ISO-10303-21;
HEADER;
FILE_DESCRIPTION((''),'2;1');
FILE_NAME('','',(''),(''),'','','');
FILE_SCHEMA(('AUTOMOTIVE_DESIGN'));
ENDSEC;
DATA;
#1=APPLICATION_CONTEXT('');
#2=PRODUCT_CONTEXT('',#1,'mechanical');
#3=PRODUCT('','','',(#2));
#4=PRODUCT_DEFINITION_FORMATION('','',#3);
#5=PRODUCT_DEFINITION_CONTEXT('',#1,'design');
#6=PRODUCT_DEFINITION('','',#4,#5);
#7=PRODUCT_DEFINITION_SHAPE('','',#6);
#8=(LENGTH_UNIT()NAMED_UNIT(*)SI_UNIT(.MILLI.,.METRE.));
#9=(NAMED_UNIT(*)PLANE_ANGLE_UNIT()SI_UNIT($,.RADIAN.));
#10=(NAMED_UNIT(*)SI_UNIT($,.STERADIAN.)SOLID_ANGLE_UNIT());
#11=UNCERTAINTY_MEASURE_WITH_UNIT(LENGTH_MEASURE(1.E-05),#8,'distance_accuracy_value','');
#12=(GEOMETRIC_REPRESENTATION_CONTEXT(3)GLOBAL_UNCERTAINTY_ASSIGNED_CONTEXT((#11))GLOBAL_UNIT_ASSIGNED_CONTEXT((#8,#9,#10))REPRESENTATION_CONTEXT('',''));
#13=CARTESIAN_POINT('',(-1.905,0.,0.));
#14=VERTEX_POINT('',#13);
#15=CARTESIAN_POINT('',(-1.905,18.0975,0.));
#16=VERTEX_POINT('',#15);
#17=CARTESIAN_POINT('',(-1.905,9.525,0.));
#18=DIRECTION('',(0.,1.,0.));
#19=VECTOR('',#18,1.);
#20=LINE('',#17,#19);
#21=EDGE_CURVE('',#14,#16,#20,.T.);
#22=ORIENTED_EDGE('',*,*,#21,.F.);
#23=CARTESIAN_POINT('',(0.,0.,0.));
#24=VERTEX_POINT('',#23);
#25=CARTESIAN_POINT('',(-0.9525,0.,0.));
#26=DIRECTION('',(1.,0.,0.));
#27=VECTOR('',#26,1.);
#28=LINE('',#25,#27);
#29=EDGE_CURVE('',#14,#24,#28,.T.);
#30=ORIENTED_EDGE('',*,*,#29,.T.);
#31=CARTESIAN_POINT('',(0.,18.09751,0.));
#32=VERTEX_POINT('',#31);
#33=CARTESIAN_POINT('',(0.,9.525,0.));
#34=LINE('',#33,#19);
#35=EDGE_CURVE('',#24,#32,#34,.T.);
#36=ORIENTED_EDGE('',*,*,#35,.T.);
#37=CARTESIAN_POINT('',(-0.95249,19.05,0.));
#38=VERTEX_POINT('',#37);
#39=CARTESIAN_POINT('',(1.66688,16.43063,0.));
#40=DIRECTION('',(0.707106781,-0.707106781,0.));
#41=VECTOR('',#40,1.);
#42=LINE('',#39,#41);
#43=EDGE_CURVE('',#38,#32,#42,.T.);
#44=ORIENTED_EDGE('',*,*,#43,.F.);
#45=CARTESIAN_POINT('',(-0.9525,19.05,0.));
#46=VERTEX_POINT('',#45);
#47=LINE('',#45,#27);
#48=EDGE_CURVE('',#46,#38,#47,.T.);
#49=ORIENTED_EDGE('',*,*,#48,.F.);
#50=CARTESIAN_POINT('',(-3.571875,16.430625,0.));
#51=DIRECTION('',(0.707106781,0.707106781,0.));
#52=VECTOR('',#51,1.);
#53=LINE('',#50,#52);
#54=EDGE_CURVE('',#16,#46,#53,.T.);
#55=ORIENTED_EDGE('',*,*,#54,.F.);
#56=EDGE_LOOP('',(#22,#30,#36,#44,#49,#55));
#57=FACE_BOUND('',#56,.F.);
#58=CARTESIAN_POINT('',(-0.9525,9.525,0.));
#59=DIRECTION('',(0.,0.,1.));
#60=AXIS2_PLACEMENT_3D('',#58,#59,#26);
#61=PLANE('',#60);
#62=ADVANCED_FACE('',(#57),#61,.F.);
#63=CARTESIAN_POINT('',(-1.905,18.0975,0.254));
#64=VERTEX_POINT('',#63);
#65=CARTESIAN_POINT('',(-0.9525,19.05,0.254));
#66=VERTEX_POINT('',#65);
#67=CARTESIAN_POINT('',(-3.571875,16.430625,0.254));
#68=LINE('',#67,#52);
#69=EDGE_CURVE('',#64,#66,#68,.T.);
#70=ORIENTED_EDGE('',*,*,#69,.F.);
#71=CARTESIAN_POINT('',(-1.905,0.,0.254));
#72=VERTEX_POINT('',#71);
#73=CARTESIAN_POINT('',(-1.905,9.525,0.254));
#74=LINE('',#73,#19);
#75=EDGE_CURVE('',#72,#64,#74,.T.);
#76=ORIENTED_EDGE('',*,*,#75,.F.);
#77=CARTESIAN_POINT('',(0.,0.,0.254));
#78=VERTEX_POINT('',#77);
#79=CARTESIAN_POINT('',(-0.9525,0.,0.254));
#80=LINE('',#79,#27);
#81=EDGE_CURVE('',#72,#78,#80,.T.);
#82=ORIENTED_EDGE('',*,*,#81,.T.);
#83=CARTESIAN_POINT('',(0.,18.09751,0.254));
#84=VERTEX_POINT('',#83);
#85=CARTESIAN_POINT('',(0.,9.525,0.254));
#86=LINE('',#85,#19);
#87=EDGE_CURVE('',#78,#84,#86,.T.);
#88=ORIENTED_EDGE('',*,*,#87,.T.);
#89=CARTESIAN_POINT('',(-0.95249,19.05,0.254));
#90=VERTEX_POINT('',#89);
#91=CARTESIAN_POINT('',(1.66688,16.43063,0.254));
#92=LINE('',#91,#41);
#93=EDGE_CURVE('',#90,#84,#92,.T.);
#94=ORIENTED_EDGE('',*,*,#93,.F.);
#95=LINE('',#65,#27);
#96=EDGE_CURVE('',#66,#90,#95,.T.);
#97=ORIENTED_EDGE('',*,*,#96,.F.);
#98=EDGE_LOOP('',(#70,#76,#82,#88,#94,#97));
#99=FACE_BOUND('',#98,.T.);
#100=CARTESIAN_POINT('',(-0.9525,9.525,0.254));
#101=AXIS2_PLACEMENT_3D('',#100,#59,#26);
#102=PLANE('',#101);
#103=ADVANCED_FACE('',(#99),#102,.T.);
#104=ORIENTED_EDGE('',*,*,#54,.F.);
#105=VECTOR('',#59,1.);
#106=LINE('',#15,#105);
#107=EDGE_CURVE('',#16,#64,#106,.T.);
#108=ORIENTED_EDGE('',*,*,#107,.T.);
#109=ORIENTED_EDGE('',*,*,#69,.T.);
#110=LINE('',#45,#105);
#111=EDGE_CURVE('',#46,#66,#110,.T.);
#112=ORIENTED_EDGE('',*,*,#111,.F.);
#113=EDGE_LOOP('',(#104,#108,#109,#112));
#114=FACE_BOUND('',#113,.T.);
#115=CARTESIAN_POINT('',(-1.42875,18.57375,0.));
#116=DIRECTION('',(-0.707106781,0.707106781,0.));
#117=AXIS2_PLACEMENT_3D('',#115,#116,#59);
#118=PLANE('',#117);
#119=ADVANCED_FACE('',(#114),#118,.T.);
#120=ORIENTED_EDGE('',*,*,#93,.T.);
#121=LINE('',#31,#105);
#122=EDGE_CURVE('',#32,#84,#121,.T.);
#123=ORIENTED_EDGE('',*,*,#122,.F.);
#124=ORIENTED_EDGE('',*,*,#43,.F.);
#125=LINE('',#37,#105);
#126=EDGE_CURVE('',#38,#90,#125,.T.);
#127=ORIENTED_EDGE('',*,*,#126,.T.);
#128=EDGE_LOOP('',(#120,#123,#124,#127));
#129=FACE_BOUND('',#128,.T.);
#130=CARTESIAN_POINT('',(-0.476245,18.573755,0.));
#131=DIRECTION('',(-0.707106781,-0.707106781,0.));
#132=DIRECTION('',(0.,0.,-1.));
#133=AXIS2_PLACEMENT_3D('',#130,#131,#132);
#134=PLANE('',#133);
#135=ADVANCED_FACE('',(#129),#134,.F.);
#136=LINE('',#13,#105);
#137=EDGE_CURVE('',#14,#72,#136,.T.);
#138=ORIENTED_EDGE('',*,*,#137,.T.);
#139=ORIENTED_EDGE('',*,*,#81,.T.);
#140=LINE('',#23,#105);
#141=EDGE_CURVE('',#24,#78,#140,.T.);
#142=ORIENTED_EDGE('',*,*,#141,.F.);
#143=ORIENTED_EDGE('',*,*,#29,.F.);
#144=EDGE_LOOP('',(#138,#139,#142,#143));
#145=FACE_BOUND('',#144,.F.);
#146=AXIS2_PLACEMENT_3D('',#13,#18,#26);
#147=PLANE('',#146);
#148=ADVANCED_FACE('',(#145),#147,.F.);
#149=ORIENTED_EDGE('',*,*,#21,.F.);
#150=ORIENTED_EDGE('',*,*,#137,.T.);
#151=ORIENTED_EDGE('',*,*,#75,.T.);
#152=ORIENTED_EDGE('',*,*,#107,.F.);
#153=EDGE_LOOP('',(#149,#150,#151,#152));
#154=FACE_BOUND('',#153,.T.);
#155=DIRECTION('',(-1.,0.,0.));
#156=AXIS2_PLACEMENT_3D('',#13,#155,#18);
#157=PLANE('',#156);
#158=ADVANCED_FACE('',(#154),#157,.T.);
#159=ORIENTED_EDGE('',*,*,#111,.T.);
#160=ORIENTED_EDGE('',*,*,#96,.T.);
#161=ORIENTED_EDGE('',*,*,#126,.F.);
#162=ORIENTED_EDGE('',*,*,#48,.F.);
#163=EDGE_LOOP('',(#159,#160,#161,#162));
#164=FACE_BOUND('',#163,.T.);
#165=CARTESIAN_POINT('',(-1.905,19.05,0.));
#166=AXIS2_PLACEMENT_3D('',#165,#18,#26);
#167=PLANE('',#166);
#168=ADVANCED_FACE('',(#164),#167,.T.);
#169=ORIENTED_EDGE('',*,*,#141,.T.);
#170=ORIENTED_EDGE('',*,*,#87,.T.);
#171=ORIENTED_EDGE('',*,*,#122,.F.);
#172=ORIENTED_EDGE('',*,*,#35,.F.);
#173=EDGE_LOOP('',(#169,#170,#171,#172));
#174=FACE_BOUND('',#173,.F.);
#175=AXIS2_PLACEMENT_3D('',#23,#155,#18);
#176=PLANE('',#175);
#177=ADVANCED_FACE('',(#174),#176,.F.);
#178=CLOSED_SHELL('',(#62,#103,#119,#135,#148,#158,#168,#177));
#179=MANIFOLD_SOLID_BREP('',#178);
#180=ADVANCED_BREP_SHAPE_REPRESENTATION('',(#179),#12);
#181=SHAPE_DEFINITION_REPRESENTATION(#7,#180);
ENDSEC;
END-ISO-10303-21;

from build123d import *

# Parameters (mm, degrees)
F0_W     = 1.905
F0_H     = 19.05
F1_DEPTH = 0.254
F2_SIZE  = 0.9525
F3_SIZE  = 0.95249


# Not quite as in the source:
# - a fillet or chamfer is up to 0.001 mm smaller than in the source, because OpenCascade refuses the exact size


with BuildPart() as f1:
    # F0 (on Top) → F1 (new body)
    with BuildSketch(Plane.XY):
        with Locations((-0.9525, 9.525)):
            Rectangle(F0_W, F0_H)
    extrude(amount=F1_DEPTH)

    # F2
    f2_edges = [f1.edges().sort_by_distance(p)[0] for p in [
        (-1.905, 19.05, 0.127),
    ]]
    chamfer(f2_edges, length=F2_SIZE)

    # F3 (size 0.9525 in the source; OpenCascade refuses exactly that, so slightly less here)
    f3_edges = [f1.edges().sort_by_distance(p)[0] for p in [
        (0, 19.05, 0.127),
    ]]
    chamfer(f3_edges, length=F3_SIZE)


solid = f1.part
